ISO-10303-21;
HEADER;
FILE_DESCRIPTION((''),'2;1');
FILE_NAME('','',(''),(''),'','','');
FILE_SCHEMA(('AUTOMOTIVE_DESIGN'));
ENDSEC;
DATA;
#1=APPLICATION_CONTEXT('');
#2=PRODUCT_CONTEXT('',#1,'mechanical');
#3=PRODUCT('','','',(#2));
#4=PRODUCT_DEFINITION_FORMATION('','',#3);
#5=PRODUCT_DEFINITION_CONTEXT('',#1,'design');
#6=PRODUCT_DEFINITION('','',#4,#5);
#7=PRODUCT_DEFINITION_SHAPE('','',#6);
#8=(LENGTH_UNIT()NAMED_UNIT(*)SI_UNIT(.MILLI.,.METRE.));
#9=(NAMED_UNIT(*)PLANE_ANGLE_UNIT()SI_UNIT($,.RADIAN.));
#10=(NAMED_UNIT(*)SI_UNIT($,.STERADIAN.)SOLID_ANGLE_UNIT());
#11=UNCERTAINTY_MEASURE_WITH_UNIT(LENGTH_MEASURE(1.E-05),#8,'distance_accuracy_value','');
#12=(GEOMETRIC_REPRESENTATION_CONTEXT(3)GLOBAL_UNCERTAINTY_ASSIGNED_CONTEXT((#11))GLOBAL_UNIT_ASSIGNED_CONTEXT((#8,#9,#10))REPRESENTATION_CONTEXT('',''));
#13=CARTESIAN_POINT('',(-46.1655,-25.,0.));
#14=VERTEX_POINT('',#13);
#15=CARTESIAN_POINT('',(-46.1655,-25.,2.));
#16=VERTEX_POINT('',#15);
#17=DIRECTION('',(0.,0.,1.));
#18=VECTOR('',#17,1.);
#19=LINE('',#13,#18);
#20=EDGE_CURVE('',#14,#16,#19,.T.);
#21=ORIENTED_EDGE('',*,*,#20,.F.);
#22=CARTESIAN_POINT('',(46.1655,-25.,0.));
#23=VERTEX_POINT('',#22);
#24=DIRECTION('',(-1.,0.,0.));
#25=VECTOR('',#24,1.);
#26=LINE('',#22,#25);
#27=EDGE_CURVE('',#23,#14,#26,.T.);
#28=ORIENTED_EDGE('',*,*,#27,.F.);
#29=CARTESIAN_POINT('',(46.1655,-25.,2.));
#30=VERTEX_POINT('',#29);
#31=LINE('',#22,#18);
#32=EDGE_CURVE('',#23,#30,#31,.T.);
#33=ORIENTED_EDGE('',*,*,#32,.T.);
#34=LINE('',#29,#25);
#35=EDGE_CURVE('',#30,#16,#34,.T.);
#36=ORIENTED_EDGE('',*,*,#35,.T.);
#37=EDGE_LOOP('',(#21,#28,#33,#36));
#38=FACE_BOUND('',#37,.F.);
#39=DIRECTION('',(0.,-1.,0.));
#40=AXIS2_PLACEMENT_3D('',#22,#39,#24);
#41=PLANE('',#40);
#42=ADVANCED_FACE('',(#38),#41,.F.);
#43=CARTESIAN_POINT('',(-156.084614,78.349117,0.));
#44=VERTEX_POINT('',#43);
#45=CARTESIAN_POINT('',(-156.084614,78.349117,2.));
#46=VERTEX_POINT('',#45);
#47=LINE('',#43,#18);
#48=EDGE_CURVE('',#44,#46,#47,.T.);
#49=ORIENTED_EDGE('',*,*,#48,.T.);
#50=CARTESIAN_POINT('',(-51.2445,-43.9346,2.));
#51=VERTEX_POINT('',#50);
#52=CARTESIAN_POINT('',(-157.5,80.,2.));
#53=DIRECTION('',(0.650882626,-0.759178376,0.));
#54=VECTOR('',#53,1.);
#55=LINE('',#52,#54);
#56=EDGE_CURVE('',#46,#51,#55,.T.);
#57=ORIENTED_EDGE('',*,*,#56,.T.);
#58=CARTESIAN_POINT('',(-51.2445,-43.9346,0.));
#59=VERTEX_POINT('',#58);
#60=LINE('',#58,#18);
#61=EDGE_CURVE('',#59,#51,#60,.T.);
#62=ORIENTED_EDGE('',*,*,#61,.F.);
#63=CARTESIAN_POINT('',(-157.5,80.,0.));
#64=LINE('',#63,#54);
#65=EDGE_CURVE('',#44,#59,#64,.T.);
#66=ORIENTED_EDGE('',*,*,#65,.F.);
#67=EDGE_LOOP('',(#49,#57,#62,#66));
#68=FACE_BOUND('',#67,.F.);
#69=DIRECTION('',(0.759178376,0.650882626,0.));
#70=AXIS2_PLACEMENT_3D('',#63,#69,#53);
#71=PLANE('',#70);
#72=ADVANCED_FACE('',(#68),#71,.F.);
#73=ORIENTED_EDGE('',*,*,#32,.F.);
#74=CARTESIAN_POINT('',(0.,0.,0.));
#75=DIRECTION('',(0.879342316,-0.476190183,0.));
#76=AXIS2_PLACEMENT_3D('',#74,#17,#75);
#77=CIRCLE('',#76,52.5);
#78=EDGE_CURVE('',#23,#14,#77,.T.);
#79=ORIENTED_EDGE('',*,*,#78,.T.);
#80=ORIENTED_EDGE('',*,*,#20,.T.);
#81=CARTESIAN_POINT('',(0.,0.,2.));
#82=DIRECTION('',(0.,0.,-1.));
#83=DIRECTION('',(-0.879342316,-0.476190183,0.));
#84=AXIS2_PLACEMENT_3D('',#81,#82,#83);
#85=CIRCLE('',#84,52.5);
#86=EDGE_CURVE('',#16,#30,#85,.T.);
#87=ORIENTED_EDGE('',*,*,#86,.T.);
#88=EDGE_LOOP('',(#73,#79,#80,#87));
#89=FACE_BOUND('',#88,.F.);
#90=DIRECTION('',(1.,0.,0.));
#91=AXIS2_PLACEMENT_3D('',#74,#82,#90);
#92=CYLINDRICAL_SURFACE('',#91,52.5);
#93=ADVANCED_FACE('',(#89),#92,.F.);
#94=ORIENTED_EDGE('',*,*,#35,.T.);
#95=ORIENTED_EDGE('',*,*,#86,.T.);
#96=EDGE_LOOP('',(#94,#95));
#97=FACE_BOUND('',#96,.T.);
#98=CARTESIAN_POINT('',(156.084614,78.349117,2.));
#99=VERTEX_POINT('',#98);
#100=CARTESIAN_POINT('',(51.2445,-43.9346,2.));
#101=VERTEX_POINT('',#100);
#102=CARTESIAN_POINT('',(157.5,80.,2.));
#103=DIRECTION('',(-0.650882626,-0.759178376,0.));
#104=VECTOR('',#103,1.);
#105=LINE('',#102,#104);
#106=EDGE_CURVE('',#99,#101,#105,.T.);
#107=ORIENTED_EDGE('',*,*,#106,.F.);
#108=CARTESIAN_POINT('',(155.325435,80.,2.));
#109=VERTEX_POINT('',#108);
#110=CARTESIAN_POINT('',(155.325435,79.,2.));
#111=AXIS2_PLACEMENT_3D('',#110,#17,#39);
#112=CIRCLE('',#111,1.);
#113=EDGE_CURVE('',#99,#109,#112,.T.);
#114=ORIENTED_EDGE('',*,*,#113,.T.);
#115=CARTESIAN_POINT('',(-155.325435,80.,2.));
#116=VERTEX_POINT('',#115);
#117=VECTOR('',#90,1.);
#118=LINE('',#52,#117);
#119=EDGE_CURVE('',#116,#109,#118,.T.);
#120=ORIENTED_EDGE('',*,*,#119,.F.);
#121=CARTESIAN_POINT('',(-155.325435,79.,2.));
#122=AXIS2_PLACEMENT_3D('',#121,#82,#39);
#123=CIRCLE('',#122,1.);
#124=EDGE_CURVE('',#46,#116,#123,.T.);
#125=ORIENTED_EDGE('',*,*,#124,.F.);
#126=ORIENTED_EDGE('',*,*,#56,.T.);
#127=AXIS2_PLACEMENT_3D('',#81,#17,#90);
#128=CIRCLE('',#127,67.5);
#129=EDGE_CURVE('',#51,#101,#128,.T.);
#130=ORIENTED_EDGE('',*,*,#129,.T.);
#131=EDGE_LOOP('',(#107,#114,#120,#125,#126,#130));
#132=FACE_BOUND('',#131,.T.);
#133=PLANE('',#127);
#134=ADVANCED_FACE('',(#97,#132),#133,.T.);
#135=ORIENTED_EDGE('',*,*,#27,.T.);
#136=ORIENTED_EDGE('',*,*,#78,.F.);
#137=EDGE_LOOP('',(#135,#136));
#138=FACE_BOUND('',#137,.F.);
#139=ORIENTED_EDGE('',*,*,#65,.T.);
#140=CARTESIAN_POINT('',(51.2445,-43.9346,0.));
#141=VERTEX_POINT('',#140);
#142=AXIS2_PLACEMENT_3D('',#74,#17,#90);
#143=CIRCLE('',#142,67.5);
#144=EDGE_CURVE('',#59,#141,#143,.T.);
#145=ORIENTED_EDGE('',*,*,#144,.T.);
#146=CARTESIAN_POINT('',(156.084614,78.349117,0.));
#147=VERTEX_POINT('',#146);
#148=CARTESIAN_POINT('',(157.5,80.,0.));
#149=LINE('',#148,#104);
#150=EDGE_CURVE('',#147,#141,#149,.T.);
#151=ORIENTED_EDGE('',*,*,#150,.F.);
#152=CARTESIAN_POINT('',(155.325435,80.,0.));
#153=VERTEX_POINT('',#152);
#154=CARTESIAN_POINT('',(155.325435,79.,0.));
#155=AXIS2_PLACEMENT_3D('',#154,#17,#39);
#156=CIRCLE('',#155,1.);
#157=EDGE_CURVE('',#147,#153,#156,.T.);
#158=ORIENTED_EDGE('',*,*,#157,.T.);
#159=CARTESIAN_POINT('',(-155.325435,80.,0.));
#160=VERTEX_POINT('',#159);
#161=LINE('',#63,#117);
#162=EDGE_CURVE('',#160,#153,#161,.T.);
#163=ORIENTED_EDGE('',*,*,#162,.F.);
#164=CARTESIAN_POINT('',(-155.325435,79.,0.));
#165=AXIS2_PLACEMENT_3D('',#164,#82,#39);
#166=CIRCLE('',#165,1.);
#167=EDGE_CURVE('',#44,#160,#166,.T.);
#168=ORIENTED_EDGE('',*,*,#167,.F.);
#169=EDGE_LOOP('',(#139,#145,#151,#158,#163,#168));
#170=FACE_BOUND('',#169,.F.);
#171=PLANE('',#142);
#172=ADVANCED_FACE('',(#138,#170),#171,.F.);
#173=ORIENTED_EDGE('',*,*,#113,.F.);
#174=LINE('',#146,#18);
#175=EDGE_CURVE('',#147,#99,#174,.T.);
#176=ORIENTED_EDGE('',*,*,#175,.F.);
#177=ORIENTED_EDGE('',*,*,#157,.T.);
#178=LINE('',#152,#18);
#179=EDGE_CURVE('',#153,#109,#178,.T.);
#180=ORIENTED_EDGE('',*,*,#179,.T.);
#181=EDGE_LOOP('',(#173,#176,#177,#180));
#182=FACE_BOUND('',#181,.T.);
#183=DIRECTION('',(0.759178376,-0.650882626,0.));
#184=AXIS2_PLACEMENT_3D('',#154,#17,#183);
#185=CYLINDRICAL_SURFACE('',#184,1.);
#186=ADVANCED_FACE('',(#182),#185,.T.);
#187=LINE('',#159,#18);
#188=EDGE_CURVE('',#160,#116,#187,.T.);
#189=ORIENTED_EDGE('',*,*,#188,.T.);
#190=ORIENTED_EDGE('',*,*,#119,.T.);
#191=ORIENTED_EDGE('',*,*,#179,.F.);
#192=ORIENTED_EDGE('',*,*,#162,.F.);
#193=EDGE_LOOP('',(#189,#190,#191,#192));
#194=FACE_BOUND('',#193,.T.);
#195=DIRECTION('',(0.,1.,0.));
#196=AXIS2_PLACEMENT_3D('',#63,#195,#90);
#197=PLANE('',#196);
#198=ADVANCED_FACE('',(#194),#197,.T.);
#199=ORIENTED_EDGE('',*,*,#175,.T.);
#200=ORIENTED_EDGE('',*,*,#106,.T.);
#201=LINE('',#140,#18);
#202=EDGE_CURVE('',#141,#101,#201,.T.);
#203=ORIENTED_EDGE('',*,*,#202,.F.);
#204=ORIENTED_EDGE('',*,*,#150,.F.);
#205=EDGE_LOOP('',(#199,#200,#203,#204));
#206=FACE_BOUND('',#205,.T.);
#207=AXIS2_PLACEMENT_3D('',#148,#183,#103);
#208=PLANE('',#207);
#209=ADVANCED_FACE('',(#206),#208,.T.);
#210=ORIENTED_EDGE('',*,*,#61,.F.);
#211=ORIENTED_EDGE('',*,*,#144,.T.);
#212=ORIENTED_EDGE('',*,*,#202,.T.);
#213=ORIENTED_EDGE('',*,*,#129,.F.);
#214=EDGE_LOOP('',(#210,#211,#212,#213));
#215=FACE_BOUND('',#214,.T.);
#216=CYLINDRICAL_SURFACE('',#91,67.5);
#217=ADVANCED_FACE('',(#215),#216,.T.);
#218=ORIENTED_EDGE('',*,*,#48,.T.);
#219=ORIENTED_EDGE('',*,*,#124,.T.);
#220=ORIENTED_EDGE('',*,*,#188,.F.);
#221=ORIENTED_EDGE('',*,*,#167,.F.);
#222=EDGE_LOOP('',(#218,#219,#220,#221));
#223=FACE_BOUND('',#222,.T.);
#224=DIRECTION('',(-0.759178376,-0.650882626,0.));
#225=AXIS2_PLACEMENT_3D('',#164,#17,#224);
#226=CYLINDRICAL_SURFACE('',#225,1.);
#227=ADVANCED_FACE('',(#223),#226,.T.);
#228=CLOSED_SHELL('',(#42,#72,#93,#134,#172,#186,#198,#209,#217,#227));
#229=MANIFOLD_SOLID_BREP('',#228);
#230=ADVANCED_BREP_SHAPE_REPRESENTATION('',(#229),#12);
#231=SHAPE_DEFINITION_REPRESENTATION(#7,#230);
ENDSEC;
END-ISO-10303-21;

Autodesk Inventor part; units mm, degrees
ref_plane "YZ Plane" through (0, 0, 0) normal (1, 0, 0) x (0, 1, 0)
ref_plane "XZ Plane" through (0, 0, 0) normal (0, 1, 0) x (-1, 0, 0)
ref_plane "XY Plane" through (0, 0, 0) normal (0, 0, 1) x (1, 0, 0)
sketch "Sketch2" plane through (0, 0, 0) normal (0, 0, 1) x (1, 0, 0)
  circle A0 centre (0, 0) radius 67.5
  line L0 (-157.5, 80) -> (-51.2445, -43.9346)
  line L1 (157.5, 80) -> (51.2445, -43.9346)
  line L2 (-157.5, 80) -> (157.5, 80)
  circle A1 centre (0, 0) radius 52.5
  line L3 (46.1655, -25) -> (-46.1655, -25)
  point P0 (0, 80)
  dimension "d11" = 135
  dimension "d12" = 15
  dimension "d13" = 315
  dimension "d14" = 80
  dimension "d15" = 25
extrude "Plate2" add sketch "Sketch2" along normal blind 2 contours A0 | A0 L0 L2 L1 | L3 A1 picked at (-3.1172, -43.6181)
fillet "Corner Round1" radius 1 2 edges at (157.5, 80, 1) (-157.5, 80, 1)
equation "\"d10\" = Thickness"
equation "\"BendRadius\" = Thickness"
equation "\"BendReliefWidth\" = Thickness"
equation "\"BendReliefDepth\" = 0.5 * Thickness"
equation "\"CornerReliefSize\" = 4 * Thickness"
equation "\"MinimumRemnant\" = 2 * Thickness"
equation "\"TransitionRadius\" = BendRadius"
equation "\"JacobiRadiusSize\" = BendRadius"
equation "\"GapSize\" = Thickness"
equation "\"Thickness\" = 2"
properties part number "ДМФ 054 фланец лотка v2.0"
